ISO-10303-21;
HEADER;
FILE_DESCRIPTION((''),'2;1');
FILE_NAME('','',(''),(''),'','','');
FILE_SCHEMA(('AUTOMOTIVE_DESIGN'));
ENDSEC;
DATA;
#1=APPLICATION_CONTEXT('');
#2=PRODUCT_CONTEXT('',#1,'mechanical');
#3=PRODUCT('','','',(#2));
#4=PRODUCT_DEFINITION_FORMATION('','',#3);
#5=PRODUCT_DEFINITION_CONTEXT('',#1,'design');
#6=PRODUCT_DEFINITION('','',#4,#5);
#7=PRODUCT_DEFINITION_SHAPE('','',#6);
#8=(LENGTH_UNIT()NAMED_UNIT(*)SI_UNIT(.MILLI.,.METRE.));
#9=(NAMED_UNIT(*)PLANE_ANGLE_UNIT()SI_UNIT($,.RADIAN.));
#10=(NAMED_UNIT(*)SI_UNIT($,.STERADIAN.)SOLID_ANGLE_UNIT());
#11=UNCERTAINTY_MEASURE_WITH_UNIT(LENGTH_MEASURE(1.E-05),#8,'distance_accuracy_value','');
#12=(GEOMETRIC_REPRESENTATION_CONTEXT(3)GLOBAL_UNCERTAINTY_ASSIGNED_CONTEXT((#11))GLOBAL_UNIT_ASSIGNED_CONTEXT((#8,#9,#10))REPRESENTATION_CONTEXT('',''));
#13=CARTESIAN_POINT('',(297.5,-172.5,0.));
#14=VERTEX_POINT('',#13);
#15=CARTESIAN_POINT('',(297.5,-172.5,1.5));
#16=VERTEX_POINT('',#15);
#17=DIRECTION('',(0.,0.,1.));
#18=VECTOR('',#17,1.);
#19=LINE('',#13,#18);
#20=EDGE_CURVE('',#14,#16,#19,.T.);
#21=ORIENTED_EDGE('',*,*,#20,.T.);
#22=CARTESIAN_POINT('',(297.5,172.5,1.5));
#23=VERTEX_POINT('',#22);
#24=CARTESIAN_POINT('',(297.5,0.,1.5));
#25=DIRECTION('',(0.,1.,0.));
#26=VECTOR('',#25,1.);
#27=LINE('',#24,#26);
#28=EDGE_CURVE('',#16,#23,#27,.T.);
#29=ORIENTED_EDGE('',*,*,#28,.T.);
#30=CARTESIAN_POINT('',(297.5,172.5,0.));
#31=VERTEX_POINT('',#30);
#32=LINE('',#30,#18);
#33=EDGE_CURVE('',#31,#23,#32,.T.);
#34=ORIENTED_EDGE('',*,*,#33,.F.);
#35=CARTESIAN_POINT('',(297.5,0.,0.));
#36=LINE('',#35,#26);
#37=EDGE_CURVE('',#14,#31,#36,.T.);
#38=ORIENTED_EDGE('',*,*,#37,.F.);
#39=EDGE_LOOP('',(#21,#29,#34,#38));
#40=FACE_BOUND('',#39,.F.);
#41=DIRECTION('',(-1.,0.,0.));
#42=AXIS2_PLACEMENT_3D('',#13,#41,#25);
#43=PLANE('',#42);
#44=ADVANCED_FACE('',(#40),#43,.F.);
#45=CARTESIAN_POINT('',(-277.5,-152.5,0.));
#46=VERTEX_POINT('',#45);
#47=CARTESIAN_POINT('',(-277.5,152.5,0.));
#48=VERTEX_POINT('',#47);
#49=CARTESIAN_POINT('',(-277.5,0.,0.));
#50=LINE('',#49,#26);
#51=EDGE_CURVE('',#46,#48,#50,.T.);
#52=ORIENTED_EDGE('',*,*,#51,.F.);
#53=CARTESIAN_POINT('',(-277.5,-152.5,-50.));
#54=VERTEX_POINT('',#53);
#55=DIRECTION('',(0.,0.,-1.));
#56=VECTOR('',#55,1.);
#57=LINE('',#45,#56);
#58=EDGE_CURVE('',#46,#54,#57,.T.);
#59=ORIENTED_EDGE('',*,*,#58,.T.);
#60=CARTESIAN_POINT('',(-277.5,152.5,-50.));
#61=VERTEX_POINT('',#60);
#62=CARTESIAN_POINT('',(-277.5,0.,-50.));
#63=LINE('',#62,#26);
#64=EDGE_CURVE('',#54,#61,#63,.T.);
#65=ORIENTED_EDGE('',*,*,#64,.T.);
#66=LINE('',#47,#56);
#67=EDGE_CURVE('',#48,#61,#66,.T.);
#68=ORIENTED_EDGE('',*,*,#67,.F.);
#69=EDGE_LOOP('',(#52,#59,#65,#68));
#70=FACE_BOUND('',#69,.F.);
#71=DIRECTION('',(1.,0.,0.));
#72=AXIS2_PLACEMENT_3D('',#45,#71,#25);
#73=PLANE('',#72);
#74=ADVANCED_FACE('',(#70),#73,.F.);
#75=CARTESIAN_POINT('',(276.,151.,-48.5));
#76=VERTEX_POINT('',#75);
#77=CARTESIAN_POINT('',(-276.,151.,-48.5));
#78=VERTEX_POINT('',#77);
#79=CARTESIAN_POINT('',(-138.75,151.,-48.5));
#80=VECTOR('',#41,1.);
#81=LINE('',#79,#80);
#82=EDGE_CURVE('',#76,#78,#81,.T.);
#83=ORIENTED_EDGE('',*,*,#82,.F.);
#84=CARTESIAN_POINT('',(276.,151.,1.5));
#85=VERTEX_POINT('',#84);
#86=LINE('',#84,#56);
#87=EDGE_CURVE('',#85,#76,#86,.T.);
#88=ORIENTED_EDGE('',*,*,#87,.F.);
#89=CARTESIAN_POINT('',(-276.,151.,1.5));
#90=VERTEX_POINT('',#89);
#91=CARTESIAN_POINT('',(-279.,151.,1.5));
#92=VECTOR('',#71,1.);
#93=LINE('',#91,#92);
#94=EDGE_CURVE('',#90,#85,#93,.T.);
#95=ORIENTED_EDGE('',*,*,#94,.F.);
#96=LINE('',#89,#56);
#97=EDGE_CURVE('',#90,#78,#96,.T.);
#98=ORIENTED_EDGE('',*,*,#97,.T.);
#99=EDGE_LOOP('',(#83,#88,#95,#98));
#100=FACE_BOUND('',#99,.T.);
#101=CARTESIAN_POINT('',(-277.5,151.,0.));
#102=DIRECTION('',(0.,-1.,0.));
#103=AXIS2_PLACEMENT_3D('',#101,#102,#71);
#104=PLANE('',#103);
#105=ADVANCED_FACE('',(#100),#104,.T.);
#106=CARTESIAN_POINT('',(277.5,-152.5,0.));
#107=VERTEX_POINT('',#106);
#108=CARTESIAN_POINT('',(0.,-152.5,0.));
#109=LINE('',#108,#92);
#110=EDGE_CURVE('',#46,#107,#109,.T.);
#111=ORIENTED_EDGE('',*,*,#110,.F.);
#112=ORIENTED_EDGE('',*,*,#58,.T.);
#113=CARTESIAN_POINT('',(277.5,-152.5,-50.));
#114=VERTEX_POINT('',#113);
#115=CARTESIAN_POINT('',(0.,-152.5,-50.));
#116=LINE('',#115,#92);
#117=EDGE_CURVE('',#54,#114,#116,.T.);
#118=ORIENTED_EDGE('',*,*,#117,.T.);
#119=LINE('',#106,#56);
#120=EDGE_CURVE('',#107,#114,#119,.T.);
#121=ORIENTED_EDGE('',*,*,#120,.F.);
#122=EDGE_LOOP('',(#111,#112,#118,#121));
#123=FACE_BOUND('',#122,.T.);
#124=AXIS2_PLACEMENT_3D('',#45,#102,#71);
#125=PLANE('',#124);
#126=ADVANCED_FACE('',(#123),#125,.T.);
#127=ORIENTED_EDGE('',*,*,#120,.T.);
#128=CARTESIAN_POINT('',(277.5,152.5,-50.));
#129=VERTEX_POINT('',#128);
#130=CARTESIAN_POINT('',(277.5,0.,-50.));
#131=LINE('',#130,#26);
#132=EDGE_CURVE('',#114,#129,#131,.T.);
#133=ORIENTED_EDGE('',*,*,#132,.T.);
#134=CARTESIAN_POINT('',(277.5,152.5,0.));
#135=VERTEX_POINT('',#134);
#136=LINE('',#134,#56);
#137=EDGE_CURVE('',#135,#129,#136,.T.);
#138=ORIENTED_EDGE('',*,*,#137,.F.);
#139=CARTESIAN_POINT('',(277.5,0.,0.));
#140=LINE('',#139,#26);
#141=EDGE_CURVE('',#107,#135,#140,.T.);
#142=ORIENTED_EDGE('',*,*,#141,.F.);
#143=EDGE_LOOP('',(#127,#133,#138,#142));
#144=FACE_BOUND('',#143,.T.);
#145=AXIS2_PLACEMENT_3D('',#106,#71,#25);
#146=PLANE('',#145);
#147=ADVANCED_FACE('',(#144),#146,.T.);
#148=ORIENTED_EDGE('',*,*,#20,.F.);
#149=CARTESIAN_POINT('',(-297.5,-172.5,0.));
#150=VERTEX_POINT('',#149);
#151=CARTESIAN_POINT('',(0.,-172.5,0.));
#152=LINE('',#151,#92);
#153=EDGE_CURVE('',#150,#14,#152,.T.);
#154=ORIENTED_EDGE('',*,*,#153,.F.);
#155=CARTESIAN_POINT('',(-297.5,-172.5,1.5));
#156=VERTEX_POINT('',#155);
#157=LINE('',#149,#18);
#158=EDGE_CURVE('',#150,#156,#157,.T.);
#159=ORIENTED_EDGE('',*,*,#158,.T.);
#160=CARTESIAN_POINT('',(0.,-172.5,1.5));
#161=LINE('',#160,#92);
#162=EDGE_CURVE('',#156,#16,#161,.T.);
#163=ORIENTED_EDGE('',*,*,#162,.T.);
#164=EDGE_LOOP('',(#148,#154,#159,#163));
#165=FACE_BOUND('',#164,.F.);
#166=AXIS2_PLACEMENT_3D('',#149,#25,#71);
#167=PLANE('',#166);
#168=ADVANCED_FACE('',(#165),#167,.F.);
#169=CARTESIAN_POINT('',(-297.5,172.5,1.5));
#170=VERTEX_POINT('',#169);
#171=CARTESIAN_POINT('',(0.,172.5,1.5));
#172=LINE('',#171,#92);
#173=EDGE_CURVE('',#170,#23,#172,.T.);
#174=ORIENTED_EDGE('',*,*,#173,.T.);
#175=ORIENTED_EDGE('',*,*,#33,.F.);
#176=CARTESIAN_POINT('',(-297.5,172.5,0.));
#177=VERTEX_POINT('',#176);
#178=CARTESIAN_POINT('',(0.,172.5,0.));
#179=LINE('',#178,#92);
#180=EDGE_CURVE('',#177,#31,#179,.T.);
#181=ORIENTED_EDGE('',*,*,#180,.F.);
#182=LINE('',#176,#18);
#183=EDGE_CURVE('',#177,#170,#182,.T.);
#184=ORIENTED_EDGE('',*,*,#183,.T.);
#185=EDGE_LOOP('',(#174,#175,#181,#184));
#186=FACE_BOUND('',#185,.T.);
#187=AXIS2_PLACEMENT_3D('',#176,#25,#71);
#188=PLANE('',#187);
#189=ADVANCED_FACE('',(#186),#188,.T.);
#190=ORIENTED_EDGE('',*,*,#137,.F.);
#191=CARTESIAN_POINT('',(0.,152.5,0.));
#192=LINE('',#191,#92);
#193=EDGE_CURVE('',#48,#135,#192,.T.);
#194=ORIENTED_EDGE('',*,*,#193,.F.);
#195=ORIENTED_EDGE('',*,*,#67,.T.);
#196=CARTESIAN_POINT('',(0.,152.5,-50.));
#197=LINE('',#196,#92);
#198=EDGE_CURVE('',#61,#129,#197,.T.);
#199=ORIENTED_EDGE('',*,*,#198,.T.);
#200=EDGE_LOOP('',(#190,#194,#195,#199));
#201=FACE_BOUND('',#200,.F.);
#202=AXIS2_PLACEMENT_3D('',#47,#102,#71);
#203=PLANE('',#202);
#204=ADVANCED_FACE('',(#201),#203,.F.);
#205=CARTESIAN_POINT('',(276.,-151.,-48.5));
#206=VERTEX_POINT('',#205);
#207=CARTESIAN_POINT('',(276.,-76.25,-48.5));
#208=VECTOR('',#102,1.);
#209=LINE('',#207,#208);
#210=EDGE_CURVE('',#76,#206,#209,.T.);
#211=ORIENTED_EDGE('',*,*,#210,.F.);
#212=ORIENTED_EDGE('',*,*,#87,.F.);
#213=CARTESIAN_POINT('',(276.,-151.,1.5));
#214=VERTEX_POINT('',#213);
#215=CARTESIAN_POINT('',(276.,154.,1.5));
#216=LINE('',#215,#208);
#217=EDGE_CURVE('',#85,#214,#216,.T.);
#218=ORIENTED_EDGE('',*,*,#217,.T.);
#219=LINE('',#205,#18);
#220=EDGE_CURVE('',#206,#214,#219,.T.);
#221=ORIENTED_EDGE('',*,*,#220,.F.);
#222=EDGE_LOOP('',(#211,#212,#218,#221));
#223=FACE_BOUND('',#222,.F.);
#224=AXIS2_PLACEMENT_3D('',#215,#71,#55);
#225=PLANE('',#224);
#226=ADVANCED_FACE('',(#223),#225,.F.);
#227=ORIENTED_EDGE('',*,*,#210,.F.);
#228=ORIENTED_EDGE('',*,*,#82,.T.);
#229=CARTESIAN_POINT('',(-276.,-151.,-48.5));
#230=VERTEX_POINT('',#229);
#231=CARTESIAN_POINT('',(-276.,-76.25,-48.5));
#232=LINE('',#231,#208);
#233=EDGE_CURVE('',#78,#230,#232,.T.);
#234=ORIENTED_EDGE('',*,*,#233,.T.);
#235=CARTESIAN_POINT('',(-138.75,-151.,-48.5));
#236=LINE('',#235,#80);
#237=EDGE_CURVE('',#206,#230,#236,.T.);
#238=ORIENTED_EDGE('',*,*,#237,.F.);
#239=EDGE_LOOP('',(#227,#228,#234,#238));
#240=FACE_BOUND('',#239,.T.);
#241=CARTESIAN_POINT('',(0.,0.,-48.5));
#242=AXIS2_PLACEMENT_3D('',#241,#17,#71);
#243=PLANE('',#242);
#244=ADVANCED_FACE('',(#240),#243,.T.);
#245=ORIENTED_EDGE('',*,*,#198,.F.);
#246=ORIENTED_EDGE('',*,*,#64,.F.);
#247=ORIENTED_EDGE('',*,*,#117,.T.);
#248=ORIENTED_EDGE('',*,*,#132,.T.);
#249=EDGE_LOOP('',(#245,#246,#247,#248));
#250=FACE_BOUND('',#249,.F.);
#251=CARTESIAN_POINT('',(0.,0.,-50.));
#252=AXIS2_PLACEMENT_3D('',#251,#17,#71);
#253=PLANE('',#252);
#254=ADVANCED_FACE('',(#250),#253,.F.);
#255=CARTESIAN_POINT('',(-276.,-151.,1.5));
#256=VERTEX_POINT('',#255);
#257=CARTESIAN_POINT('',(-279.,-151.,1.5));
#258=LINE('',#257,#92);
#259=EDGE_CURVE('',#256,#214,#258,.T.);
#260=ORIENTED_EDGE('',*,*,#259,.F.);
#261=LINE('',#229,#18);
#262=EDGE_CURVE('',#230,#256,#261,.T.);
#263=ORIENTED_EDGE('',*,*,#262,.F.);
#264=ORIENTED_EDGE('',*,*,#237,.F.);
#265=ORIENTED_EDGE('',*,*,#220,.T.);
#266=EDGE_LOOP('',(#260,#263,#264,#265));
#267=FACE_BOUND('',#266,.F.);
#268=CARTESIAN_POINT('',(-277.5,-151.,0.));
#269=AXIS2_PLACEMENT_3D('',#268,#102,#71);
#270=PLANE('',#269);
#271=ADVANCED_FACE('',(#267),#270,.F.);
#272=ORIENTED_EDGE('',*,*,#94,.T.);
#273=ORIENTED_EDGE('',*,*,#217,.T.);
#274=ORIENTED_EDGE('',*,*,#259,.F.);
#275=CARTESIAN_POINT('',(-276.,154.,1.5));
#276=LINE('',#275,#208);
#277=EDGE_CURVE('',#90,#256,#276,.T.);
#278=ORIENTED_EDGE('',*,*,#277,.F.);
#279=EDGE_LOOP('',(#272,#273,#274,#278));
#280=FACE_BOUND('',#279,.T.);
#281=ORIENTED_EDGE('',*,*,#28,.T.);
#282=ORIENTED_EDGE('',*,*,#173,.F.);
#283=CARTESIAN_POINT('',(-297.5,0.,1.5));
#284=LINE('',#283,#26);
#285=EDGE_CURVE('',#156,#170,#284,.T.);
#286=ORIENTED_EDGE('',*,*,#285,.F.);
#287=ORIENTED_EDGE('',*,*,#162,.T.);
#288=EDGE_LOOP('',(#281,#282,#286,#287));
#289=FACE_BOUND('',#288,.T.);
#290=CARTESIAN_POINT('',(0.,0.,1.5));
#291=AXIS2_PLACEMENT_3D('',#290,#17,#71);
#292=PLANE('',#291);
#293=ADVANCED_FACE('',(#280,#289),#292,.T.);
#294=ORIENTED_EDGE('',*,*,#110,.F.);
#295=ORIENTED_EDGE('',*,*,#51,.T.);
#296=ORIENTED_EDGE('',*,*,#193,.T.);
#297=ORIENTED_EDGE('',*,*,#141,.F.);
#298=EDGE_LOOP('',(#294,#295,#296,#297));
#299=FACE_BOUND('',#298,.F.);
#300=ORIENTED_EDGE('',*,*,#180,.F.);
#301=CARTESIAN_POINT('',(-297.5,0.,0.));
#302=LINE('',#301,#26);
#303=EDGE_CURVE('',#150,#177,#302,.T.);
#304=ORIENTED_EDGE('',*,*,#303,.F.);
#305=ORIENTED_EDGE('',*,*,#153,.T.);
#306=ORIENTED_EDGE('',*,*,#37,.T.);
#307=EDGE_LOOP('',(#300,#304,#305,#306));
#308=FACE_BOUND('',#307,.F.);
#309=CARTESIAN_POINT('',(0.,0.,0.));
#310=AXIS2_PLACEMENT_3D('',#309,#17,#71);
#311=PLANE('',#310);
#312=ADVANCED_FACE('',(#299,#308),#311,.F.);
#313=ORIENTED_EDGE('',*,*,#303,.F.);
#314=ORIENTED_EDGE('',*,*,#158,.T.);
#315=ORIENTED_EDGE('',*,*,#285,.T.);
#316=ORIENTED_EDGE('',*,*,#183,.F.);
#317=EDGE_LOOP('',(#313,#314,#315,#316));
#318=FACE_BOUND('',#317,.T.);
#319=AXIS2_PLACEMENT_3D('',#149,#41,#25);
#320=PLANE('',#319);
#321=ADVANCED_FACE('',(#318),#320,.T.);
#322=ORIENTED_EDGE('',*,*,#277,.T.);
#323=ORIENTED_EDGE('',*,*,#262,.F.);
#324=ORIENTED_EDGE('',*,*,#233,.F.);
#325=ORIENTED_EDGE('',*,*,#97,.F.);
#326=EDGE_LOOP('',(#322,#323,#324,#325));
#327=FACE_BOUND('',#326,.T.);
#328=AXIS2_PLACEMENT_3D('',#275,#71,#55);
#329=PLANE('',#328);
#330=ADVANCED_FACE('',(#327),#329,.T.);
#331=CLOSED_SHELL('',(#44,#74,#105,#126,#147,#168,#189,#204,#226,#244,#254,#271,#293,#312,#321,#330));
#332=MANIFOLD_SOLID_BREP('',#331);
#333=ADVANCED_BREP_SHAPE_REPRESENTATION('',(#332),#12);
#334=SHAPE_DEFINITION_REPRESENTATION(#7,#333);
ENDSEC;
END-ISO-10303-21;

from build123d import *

# Parameters (mm, degrees)
F0_W        = 555
F0_H        = 305
F1_DEPTH    = 50
F2_W        = 595
F2_H        = 345
F2_W_2      = 555
F2_H_2      = 305
F3_DEPTH    = 1.5
F4_T        = 1.5
F4_T3_DEPTH = 308
F4_T5_DEPTH = 558


# Not quite as in the source:
# - a shell that OpenCascade refuses in one call is made with other operations: the cavity is built on its own and cut out


with BuildPart() as f1:
    # F0 (on Top) → F1 (new body)
    with BuildSketch(Plane.XY):
        Rectangle(F0_W, F0_H)
    extrude(amount=-F1_DEPTH)

    # F2 (on face) → F3 (join)
    with BuildSketch(Plane.XY):
        Rectangle(F2_W, F2_H)
        Rectangle(F2_W_2, F2_H_2, mode=Mode.SUBTRACT)
        Rectangle(F2_W_2, F2_H_2)
    extrude(amount=F3_DEPTH)

    # F4: shell of thickness 1.5, made by hand


with BuildPart() as f4_core1:
    # F4_t2: copy of F1
    add(f1.part)

    # the walls: a layer under each face that stays
    f4_faces = [f4_core1.faces().sort_by_distance(p)[0] for p in [
        (-297.5, 0, 0.75),
        (0, 172.5, 0.75),
        (0, -172.5, 0.75),
        (-277.6666666667, -161, 0),
        (297.5, 0, 0.75),
        (-277.5, 0, -25),
        (0, -152.5, -25),
        (277.5, 0, -25),
        (0, 152.5, -25),
        (0, 0, -50),
    ]]
    thicken(f4_faces, amount=-F4_T, mode=Mode.SUBTRACT)

    # F4_s4 → F4_t3 (cut)
    with BuildSketch(Plane.XZ.offset(-154)):
        Polygon((-277.515, -0.015), (-277.5, 1.5), (-276, 1.5), (-276, 0), align=None)
        Polygon((277.515, -0.015), (277.5, 1.5), (276, 1.5), (276, 0), align=None)
    extrude(amount=F4_T3_DEPTH, mode=Mode.SUBTRACT)

    # F4_s6 → F4_t5 (cut)
    with BuildSketch(Plane.YZ.offset(-279)):
        Polygon((-152.515, -0.015), (-152.5, 1.5), (-151, 1.5), (-151, 0), align=None)
        Polygon((152.515, -0.015), (152.5, 1.5), (151, 1.5), (151, 0), align=None)
    extrude(amount=F4_T5_DEPTH, mode=Mode.SUBTRACT)


with BuildPart() as f1_1:
    add(f1.part)

    # what is left inside the walls is the cavity
    f4_cavity = [f4_core1.part.solids().sort_by_distance(p)[0] for p in [
        (0, -50.333333, -48.485),
    ]]
    add(f4_cavity, mode=Mode.SUBTRACT)


solid = f1_1.part
